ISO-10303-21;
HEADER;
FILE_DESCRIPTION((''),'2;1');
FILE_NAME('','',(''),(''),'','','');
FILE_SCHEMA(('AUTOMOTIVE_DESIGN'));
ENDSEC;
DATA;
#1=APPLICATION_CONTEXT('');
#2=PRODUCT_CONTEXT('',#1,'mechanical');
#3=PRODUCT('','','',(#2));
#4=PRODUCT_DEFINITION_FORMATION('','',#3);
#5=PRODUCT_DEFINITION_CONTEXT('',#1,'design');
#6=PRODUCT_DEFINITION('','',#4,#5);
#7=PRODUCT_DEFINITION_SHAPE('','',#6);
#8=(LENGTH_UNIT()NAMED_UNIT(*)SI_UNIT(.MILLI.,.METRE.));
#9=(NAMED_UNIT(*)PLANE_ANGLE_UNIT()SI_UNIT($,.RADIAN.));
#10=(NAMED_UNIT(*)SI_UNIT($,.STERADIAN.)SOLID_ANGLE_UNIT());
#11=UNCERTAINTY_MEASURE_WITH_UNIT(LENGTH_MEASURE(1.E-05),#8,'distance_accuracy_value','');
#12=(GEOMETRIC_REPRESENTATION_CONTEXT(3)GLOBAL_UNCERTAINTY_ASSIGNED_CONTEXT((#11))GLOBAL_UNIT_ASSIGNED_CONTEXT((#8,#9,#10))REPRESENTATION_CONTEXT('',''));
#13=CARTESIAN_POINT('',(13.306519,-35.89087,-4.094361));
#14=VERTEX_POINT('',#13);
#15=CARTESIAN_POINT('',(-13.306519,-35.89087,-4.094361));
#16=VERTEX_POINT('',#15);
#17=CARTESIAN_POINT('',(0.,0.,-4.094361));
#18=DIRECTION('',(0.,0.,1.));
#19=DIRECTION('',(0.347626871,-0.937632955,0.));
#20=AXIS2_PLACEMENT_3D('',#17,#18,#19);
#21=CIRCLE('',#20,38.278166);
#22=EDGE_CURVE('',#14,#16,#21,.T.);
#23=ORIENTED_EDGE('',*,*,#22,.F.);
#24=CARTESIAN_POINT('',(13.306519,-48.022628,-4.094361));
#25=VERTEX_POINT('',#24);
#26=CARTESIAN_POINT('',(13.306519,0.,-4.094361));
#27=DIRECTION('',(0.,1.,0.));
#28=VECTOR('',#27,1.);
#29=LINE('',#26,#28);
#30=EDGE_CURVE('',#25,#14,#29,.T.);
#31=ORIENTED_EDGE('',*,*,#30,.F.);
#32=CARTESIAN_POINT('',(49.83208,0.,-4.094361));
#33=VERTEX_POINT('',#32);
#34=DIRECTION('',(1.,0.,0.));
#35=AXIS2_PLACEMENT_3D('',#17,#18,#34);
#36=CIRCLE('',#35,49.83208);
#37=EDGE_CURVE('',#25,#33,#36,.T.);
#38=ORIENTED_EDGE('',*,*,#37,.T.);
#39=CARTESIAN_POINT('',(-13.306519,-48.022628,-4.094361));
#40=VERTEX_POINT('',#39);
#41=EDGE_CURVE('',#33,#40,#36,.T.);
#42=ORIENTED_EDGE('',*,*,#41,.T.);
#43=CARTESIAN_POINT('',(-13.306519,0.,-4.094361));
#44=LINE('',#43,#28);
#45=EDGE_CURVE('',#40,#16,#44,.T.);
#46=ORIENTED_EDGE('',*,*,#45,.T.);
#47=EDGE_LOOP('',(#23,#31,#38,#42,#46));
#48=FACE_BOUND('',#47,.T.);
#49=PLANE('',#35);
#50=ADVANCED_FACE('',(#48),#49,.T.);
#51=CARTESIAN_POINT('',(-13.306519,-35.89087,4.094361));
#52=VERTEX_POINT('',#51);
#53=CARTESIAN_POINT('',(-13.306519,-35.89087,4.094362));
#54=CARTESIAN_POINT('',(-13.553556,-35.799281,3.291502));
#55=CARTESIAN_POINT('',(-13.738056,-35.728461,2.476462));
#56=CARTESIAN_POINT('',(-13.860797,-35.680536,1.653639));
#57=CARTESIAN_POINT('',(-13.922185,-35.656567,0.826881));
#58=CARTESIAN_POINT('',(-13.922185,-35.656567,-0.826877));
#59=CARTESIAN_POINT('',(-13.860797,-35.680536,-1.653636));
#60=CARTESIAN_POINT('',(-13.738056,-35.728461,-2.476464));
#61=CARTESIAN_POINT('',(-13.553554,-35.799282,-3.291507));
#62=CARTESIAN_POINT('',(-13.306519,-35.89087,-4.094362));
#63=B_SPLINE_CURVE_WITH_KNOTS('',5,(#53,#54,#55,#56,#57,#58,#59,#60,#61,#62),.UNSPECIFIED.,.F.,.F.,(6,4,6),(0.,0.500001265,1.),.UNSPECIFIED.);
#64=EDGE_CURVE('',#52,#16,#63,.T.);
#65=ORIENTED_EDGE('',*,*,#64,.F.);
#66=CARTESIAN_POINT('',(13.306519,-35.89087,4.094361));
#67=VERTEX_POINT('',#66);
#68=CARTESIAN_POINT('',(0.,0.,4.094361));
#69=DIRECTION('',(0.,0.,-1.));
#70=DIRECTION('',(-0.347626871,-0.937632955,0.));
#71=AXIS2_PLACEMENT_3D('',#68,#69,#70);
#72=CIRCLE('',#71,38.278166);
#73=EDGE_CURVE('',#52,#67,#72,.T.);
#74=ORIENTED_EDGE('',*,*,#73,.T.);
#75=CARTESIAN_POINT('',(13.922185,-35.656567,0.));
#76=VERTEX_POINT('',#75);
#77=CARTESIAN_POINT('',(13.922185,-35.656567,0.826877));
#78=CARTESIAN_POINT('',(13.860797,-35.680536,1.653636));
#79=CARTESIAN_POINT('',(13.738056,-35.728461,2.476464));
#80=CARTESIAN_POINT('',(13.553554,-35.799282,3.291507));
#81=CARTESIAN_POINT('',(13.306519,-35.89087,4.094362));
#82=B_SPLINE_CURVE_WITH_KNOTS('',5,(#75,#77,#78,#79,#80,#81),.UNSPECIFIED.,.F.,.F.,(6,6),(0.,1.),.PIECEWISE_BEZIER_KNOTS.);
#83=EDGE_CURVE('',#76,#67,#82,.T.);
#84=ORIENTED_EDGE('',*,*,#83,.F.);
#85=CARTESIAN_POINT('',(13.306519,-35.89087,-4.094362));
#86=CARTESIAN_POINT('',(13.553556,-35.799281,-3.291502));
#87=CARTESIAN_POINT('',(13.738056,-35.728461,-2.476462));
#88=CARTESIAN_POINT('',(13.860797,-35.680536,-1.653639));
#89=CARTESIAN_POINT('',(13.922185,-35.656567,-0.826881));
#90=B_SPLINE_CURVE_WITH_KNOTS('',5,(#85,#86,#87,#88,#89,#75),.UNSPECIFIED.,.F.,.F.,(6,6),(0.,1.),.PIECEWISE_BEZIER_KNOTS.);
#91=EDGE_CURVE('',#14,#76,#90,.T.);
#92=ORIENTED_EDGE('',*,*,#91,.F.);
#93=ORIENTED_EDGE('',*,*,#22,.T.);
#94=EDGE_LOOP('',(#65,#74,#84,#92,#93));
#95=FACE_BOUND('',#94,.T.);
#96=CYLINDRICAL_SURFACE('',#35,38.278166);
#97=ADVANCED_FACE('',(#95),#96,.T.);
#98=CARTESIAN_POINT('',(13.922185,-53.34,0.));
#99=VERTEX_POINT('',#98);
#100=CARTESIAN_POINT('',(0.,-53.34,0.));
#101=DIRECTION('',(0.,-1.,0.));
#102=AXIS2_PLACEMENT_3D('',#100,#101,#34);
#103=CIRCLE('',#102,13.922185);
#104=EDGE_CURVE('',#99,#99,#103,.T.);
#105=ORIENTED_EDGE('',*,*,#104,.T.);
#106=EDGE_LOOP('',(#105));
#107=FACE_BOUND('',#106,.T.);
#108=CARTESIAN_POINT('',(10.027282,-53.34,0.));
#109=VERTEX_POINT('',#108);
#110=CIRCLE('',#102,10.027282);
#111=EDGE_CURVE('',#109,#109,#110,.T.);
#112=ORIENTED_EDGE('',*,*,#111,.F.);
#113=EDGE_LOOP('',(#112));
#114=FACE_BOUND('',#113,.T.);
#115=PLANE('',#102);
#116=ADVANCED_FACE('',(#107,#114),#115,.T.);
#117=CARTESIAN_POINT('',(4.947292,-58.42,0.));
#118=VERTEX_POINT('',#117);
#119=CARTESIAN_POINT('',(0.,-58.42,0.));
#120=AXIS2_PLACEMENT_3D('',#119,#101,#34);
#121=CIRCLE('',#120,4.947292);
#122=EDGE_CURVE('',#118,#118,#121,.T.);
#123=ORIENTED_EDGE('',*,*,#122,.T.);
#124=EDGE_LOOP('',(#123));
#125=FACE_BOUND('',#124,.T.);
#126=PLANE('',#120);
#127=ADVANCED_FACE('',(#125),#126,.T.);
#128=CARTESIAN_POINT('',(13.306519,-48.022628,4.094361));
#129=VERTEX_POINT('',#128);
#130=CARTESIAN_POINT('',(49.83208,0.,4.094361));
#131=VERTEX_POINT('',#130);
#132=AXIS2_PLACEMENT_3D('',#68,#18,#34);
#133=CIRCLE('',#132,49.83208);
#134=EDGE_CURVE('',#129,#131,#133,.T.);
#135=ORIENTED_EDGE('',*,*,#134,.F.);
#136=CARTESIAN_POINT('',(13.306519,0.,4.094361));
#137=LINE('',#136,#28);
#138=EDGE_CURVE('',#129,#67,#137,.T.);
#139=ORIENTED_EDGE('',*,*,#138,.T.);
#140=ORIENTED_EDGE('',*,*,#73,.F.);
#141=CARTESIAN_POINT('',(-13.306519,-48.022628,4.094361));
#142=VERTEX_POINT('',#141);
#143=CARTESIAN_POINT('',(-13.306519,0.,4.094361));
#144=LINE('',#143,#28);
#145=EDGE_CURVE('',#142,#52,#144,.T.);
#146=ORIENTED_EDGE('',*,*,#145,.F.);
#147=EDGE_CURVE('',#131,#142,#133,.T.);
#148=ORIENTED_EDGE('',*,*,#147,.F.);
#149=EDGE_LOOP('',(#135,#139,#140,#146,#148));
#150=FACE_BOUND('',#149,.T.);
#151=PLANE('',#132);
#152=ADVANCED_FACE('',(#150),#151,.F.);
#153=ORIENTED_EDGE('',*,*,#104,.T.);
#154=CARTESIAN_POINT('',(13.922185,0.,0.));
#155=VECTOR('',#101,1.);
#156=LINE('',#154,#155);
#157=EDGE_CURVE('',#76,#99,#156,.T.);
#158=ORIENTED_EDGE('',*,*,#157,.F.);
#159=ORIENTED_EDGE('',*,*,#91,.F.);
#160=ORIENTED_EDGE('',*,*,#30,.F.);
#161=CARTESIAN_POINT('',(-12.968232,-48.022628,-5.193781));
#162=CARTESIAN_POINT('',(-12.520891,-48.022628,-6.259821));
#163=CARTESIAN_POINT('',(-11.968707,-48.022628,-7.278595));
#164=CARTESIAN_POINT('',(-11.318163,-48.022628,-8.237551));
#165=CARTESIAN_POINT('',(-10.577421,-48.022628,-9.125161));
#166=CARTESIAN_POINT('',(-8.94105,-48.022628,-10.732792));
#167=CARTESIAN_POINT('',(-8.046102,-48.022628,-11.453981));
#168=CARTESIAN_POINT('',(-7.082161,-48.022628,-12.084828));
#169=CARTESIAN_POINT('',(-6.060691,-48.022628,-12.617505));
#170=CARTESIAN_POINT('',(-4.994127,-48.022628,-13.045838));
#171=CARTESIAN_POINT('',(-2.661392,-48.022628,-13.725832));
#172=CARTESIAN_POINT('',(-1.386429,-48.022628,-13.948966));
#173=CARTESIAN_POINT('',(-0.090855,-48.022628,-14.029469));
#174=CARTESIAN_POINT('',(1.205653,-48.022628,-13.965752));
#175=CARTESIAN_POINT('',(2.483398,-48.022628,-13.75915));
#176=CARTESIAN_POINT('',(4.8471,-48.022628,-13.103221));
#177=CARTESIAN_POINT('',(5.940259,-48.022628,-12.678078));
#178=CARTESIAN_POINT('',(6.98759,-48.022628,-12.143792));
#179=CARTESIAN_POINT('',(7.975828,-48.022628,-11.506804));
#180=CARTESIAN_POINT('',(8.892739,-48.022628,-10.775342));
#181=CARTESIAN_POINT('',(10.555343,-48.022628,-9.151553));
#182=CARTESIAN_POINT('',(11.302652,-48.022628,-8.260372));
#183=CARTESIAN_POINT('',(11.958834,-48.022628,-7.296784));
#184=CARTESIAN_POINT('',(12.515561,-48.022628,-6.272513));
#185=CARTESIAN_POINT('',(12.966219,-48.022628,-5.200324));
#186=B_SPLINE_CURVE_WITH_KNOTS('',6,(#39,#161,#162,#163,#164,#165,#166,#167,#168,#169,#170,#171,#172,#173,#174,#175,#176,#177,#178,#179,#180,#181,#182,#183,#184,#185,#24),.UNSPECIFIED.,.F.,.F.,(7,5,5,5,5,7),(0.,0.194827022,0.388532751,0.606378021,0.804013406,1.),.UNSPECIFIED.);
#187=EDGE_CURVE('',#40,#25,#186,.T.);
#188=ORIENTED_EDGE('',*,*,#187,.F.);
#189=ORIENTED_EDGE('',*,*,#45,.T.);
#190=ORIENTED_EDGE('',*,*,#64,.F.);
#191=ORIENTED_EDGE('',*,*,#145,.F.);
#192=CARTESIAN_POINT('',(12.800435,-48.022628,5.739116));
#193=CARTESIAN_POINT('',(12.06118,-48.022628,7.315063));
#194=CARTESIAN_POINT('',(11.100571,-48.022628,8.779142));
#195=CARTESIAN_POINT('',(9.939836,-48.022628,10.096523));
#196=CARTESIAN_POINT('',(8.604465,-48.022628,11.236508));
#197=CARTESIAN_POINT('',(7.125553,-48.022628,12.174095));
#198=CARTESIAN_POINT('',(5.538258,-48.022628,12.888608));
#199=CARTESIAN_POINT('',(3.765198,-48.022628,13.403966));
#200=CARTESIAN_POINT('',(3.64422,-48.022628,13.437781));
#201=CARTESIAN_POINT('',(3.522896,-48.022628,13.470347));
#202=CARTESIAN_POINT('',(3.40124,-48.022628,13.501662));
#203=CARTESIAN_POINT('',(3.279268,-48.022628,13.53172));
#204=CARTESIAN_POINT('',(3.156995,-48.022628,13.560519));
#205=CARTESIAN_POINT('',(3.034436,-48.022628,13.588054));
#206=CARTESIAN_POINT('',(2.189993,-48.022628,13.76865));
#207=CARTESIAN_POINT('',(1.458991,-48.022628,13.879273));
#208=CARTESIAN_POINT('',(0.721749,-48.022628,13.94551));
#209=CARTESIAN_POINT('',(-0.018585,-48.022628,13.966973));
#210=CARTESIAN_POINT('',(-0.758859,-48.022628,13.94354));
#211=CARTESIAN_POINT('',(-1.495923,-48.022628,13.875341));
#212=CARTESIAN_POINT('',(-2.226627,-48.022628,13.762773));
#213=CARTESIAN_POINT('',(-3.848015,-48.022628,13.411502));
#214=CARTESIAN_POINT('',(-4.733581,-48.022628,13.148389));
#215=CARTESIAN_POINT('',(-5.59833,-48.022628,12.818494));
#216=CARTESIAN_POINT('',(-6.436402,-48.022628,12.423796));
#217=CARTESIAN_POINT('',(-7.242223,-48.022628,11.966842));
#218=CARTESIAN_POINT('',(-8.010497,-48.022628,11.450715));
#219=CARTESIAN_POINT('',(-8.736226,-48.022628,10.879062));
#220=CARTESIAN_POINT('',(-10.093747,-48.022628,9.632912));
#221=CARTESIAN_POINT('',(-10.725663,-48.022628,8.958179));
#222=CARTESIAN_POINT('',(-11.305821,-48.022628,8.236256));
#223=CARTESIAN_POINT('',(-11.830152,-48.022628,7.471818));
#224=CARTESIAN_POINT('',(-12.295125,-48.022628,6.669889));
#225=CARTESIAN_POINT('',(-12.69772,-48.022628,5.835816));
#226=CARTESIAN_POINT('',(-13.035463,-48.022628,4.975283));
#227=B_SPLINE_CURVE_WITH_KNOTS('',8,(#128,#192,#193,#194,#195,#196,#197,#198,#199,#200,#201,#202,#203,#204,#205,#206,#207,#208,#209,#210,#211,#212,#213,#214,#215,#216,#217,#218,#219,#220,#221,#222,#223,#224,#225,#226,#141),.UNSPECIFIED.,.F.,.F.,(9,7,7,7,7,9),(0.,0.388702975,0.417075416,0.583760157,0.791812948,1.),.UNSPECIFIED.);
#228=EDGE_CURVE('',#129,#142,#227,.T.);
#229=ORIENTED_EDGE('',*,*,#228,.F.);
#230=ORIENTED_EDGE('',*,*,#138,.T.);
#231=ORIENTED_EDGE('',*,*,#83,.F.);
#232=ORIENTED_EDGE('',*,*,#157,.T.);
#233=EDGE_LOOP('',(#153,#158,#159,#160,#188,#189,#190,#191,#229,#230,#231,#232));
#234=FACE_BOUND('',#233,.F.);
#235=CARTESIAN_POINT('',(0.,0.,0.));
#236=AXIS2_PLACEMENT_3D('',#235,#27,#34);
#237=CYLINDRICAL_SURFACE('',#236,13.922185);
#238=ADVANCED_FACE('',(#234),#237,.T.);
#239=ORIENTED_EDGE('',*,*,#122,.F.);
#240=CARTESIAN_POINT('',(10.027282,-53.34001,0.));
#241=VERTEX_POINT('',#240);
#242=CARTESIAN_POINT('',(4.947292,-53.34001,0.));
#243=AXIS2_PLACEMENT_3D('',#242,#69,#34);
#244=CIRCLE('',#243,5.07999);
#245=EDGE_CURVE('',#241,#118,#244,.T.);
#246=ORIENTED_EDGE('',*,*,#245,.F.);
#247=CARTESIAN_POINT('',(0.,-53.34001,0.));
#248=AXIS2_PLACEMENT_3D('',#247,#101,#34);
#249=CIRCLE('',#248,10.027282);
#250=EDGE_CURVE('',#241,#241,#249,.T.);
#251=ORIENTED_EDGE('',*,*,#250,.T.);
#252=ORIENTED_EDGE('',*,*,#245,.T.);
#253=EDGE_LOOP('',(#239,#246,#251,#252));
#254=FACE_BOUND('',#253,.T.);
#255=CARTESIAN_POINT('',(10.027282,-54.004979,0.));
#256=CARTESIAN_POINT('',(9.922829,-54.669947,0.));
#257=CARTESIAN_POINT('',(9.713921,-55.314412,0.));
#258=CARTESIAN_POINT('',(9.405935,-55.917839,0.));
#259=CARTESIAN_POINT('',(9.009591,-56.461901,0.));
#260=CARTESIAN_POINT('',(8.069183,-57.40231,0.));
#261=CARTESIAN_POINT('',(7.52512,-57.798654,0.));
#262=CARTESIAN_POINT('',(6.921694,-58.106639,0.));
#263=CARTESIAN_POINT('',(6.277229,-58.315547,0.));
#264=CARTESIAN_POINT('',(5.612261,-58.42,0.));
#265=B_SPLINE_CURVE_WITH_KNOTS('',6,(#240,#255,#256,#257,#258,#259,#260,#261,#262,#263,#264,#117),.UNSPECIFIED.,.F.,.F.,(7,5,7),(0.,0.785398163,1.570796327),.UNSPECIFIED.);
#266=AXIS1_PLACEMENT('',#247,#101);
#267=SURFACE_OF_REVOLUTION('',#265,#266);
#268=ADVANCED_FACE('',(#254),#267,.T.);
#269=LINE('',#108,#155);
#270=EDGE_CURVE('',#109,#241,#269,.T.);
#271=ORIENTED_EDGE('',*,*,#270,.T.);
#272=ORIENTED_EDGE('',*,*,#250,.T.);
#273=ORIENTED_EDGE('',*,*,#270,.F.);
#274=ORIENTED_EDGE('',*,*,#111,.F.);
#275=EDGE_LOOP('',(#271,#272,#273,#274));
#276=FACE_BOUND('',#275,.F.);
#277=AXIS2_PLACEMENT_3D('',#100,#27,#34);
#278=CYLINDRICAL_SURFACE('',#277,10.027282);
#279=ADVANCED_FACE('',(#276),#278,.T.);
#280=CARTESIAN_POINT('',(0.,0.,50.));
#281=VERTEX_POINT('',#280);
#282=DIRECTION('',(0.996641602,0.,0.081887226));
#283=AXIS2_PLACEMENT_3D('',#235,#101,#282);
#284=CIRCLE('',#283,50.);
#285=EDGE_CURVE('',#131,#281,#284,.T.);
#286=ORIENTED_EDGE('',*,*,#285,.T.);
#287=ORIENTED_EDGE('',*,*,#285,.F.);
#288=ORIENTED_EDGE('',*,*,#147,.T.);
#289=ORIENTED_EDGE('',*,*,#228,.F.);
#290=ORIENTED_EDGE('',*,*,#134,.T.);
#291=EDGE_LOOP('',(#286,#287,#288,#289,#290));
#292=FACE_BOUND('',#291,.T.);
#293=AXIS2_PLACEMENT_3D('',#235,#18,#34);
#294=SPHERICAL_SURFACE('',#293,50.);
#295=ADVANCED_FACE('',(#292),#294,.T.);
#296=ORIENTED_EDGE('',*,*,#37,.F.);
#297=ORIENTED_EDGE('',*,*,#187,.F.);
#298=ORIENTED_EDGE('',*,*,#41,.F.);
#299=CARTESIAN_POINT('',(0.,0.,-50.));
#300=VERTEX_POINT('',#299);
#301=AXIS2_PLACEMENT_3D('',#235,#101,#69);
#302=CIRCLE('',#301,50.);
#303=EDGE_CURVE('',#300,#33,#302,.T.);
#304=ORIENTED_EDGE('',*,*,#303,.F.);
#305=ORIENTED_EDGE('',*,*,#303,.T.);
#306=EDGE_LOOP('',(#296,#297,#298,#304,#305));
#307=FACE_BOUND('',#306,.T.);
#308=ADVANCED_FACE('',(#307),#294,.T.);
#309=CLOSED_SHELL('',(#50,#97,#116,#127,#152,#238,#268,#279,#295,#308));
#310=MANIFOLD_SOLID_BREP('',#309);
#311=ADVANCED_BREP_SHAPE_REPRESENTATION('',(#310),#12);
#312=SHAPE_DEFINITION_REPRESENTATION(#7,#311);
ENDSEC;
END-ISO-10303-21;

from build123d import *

# Parameters (mm, degrees)
F2_R     = 13.922185385
F3_DEPTH = 53.34
F4_R     = 10.0272817178
F5_DEPTH = 5.08
F6_R     = 5.07999


# Not quite as in the source:
# - a fillet or chamfer is up to 0.001 mm smaller than in the source, because OpenCascade refuses the exact size


with BuildPart() as f1:
    # F0 (on Front) → F1 (revolve)
    with BuildSketch(Plane.XZ):
        with BuildLine():
            Line((0, 0), (0, -50))
            ThreePointArc((0, -50), (33.8768500277, -36.7744344919), (49.8320800855, -4.0943612879))
            Line((49.8320800855, -4.0943612879), (38.2781662047, -4.0943612879))
            Line((38.2781662047, -4.0943612879), (38.2781662047, 0))
            Line((38.2781662047, 0), (38.2781662047, 4.0943612879))
            Line((38.2781662047, 4.0943612879), (49.8320800855, 4.0943612879))
            ThreePointArc((49.8320800855, 4.0943612879), (33.8768500277, 36.7744344919), (0, 50))
            Line((0, 50), (0, 0))
        make_face()
    revolve(axis=Axis((0, 0, 25), (0, 0, 1)))

    # F2 (on Front) → F3 (join)
    with BuildSketch(Plane.XZ):
        Circle(F2_R)
    extrude(amount=F3_DEPTH)

    # F4 (on face) → F5 (join)
    with BuildSketch(Plane.XZ.offset(53.34)):
        Circle(F4_R)
    extrude(amount=F5_DEPTH)

    # F6 (radius 5.08 in the source; OpenCascade refuses exactly that, so slightly less here)
    f6_edges = [f1.edges().sort_by_distance(p)[0] for p in [
        (-10.027282, -58.42, 0),
    ]]
    fillet(f6_edges, radius=F6_R)


solid = f1.part
